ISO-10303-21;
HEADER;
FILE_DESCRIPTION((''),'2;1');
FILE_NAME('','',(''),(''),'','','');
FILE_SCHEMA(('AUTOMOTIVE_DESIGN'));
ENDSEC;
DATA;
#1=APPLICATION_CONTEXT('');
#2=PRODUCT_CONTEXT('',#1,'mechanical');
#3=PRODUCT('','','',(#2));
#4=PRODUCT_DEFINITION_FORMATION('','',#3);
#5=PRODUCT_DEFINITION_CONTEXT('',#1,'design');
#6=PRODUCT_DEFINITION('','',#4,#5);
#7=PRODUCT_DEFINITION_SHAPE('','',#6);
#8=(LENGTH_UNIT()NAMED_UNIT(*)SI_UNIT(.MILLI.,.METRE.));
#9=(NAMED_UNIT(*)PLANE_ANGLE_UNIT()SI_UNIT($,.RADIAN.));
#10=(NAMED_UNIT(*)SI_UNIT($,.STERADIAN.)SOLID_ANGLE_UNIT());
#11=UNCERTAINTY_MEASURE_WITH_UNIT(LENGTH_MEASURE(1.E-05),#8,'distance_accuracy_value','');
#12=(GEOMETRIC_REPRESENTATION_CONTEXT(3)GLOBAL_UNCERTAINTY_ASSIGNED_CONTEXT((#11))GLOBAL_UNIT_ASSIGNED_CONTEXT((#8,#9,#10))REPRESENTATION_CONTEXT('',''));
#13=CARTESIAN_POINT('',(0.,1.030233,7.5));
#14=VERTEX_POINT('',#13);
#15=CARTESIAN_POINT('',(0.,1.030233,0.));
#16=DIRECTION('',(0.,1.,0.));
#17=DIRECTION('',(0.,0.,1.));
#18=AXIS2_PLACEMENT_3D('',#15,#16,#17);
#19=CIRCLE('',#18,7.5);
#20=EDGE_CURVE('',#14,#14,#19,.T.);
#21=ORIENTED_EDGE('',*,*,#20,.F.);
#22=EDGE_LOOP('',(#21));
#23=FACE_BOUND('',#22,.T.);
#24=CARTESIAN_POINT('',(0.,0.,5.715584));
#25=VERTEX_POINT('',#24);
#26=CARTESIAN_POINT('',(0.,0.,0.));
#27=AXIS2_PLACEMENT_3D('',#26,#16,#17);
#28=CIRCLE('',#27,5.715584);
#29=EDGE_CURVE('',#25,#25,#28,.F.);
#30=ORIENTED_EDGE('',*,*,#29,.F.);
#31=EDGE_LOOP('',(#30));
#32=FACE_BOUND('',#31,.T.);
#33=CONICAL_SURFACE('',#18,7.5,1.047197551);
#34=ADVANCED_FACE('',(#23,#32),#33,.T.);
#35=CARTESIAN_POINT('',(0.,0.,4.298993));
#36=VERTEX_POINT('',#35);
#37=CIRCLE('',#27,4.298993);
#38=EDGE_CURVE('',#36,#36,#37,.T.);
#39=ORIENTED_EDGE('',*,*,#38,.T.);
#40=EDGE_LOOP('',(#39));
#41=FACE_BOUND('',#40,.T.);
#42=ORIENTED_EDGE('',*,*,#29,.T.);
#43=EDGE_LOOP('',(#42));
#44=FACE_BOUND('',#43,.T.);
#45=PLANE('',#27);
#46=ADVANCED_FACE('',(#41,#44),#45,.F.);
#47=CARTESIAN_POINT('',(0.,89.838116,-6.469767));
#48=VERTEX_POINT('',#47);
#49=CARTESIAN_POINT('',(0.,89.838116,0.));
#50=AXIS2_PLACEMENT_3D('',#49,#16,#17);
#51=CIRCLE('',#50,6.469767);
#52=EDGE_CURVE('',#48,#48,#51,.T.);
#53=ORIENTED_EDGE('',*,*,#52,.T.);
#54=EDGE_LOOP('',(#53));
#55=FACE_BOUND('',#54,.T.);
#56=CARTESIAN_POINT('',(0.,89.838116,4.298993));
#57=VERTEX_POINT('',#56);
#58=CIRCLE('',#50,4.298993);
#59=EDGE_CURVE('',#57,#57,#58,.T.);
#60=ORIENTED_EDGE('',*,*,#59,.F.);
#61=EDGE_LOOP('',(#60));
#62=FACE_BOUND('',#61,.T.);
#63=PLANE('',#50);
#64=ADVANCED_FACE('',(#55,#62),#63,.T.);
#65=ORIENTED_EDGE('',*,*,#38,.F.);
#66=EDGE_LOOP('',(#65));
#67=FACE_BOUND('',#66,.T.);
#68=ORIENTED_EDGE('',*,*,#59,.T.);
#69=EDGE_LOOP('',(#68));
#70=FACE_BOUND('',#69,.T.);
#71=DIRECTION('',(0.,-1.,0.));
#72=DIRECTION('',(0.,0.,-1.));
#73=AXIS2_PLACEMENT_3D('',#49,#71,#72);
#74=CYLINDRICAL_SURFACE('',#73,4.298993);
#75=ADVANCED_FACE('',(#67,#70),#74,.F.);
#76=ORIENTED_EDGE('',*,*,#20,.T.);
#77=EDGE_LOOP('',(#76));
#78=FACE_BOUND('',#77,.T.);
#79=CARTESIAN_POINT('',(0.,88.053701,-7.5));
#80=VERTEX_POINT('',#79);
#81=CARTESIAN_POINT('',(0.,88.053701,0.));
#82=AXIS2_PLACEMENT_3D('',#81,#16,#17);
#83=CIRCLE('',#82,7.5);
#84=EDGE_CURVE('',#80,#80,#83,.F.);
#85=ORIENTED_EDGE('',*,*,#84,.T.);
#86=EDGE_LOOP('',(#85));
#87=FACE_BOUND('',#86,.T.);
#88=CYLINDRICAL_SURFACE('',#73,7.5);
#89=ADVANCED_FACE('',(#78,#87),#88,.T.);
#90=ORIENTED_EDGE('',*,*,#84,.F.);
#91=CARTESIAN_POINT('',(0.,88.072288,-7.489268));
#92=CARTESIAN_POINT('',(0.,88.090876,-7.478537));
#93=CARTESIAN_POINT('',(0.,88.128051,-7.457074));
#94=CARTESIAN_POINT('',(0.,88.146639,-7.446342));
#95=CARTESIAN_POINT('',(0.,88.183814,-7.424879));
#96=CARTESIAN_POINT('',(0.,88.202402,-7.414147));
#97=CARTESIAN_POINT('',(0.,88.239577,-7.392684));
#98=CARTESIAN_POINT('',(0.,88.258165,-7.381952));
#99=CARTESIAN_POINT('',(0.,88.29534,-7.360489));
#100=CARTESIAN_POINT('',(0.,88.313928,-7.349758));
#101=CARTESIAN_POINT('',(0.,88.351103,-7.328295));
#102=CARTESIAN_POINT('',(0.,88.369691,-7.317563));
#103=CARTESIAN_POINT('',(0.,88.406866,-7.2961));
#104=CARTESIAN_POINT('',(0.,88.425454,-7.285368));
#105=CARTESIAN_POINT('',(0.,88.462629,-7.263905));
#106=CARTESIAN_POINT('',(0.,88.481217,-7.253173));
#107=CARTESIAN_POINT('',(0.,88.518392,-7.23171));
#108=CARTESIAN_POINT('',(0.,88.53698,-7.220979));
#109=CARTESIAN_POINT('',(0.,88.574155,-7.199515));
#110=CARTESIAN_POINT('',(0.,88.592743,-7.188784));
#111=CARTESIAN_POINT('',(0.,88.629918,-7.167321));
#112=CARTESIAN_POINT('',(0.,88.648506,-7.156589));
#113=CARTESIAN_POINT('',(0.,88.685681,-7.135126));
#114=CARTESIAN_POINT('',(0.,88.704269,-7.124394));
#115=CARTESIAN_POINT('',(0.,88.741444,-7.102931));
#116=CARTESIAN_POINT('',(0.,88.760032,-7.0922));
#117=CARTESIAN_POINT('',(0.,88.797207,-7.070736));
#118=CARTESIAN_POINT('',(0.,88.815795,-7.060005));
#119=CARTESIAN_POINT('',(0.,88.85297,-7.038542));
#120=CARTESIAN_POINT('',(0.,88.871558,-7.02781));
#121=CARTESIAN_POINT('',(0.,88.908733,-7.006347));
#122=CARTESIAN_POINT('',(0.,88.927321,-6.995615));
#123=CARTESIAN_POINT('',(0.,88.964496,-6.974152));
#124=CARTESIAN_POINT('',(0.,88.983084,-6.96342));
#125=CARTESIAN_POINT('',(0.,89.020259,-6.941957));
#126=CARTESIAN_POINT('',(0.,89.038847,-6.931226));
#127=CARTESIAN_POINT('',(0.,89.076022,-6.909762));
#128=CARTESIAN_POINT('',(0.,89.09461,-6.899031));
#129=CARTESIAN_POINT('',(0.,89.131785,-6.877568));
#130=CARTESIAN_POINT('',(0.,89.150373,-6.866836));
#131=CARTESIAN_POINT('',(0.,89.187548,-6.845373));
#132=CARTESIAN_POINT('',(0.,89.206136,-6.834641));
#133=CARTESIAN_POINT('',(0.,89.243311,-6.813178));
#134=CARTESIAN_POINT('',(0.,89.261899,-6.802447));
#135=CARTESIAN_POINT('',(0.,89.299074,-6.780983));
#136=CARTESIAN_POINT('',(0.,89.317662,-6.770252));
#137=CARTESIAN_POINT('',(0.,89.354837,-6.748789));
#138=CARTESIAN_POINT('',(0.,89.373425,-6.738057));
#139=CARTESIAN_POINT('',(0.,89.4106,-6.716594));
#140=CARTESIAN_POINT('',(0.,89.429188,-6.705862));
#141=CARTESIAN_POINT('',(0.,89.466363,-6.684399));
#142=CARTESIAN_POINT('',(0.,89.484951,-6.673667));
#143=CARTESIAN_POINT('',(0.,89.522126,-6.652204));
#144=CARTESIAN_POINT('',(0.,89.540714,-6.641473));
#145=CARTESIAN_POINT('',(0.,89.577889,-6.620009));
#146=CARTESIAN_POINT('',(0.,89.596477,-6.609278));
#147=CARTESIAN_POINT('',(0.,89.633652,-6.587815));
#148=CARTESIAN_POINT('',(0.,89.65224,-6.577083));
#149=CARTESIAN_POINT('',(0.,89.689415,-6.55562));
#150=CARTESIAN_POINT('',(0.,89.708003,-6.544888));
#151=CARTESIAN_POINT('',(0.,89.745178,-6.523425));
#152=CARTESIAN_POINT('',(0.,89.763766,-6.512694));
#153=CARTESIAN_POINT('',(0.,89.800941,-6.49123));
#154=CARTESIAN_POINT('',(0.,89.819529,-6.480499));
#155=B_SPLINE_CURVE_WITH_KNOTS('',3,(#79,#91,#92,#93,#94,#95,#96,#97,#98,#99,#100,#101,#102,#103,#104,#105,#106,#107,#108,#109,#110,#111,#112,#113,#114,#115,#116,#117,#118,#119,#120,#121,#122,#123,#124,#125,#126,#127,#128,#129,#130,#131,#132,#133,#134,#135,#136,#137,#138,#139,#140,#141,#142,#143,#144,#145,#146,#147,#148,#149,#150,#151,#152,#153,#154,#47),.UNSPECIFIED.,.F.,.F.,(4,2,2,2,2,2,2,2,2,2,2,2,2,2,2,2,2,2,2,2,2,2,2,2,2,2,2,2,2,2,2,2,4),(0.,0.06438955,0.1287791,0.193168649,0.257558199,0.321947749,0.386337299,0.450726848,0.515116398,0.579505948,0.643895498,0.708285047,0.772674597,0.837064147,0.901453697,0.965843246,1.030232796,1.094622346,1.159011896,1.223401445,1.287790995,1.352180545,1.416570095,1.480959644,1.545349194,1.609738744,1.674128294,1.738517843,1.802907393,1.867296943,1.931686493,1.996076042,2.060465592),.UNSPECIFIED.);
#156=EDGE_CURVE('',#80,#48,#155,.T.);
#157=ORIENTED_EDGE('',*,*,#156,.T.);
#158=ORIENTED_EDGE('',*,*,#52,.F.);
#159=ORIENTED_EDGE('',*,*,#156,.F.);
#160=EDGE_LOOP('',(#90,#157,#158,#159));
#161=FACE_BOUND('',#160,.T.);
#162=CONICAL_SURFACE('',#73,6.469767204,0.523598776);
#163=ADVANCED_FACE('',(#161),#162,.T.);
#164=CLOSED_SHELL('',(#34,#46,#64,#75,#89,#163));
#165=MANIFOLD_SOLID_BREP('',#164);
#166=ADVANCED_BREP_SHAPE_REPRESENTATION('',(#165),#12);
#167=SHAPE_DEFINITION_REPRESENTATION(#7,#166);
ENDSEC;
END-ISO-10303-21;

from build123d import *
from OCP.BRepFilletAPI import BRepFilletAPI_MakeChamfer

# Parameters (mm, degrees)
SKETCH1_R           = 7.5
BOSS_EXTRUDE1_DEPTH = 89.838116211
SKETCH2_R           = 4.298993134
CUT_EXTRUDE1_DEPTH  = 91.462075614
CHAMFER1_SIZE       = 1.784415546
CHAMFER1_SIZE2      = 1.030232796


with BuildPart() as part:
    # Sketch1 → Boss-Extrude1 (new body)
    with BuildSketch(Plane(origin=(0, 0, 0), x_dir=(1, 0, 0), z_dir=(0, 1, 0))):
        Circle(SKETCH1_R)
    extrude(amount=BOSS_EXTRUDE1_DEPTH)

    # Sketch2 → Cut-Extrude1 (cut, through all)
    with BuildSketch(Plane(origin=(0, 0, 0), x_dir=(1, 0, 0), z_dir=(0, 1, 0))):
        Circle(SKETCH2_R)
    extrude(amount=CUT_EXTRUDE1_DEPTH, mode=Mode.SUBTRACT)

    # Chamfer1: one chamfer whose edges measure the first distance from different faces: ONE call of the kernel's chamfer builder (chamfer() names one face for all edges)
    chamfer1_edges_1 = [part.edges().sort_by_distance(p)[0] for p in [
        (-7.5, 89.838116211, 0),
    ]]
    chamfer1_side_1 = [part.faces().sort_by_distance(p)[0] for p in [
        (-7.5, 44.919058105, 0),
    ]]
    chamfer1_edges_2 = [part.edges().sort_by_distance(p)[0] for p in [
        (-7.5, 0, 0),
    ]]
    chamfer1_side_2 = [part.faces().sort_by_distance(p)[0] for p in [
        (-7.287867966, 0, 0),
    ]]
    chamfer1 = BRepFilletAPI_MakeChamfer(part.part.solid().wrapped)
    for e in chamfer1_edges_1:
        chamfer1.Add(CHAMFER1_SIZE, CHAMFER1_SIZE2, e.wrapped, chamfer1_side_1[0].wrapped)  # the first distance lies on this face
    for e in chamfer1_edges_2:
        chamfer1.Add(CHAMFER1_SIZE, CHAMFER1_SIZE2, e.wrapped, chamfer1_side_2[0].wrapped)  # the first distance lies on this face
    add(Compound.cast(chamfer1.Shape()), mode=Mode.REPLACE)


solid = part.part
